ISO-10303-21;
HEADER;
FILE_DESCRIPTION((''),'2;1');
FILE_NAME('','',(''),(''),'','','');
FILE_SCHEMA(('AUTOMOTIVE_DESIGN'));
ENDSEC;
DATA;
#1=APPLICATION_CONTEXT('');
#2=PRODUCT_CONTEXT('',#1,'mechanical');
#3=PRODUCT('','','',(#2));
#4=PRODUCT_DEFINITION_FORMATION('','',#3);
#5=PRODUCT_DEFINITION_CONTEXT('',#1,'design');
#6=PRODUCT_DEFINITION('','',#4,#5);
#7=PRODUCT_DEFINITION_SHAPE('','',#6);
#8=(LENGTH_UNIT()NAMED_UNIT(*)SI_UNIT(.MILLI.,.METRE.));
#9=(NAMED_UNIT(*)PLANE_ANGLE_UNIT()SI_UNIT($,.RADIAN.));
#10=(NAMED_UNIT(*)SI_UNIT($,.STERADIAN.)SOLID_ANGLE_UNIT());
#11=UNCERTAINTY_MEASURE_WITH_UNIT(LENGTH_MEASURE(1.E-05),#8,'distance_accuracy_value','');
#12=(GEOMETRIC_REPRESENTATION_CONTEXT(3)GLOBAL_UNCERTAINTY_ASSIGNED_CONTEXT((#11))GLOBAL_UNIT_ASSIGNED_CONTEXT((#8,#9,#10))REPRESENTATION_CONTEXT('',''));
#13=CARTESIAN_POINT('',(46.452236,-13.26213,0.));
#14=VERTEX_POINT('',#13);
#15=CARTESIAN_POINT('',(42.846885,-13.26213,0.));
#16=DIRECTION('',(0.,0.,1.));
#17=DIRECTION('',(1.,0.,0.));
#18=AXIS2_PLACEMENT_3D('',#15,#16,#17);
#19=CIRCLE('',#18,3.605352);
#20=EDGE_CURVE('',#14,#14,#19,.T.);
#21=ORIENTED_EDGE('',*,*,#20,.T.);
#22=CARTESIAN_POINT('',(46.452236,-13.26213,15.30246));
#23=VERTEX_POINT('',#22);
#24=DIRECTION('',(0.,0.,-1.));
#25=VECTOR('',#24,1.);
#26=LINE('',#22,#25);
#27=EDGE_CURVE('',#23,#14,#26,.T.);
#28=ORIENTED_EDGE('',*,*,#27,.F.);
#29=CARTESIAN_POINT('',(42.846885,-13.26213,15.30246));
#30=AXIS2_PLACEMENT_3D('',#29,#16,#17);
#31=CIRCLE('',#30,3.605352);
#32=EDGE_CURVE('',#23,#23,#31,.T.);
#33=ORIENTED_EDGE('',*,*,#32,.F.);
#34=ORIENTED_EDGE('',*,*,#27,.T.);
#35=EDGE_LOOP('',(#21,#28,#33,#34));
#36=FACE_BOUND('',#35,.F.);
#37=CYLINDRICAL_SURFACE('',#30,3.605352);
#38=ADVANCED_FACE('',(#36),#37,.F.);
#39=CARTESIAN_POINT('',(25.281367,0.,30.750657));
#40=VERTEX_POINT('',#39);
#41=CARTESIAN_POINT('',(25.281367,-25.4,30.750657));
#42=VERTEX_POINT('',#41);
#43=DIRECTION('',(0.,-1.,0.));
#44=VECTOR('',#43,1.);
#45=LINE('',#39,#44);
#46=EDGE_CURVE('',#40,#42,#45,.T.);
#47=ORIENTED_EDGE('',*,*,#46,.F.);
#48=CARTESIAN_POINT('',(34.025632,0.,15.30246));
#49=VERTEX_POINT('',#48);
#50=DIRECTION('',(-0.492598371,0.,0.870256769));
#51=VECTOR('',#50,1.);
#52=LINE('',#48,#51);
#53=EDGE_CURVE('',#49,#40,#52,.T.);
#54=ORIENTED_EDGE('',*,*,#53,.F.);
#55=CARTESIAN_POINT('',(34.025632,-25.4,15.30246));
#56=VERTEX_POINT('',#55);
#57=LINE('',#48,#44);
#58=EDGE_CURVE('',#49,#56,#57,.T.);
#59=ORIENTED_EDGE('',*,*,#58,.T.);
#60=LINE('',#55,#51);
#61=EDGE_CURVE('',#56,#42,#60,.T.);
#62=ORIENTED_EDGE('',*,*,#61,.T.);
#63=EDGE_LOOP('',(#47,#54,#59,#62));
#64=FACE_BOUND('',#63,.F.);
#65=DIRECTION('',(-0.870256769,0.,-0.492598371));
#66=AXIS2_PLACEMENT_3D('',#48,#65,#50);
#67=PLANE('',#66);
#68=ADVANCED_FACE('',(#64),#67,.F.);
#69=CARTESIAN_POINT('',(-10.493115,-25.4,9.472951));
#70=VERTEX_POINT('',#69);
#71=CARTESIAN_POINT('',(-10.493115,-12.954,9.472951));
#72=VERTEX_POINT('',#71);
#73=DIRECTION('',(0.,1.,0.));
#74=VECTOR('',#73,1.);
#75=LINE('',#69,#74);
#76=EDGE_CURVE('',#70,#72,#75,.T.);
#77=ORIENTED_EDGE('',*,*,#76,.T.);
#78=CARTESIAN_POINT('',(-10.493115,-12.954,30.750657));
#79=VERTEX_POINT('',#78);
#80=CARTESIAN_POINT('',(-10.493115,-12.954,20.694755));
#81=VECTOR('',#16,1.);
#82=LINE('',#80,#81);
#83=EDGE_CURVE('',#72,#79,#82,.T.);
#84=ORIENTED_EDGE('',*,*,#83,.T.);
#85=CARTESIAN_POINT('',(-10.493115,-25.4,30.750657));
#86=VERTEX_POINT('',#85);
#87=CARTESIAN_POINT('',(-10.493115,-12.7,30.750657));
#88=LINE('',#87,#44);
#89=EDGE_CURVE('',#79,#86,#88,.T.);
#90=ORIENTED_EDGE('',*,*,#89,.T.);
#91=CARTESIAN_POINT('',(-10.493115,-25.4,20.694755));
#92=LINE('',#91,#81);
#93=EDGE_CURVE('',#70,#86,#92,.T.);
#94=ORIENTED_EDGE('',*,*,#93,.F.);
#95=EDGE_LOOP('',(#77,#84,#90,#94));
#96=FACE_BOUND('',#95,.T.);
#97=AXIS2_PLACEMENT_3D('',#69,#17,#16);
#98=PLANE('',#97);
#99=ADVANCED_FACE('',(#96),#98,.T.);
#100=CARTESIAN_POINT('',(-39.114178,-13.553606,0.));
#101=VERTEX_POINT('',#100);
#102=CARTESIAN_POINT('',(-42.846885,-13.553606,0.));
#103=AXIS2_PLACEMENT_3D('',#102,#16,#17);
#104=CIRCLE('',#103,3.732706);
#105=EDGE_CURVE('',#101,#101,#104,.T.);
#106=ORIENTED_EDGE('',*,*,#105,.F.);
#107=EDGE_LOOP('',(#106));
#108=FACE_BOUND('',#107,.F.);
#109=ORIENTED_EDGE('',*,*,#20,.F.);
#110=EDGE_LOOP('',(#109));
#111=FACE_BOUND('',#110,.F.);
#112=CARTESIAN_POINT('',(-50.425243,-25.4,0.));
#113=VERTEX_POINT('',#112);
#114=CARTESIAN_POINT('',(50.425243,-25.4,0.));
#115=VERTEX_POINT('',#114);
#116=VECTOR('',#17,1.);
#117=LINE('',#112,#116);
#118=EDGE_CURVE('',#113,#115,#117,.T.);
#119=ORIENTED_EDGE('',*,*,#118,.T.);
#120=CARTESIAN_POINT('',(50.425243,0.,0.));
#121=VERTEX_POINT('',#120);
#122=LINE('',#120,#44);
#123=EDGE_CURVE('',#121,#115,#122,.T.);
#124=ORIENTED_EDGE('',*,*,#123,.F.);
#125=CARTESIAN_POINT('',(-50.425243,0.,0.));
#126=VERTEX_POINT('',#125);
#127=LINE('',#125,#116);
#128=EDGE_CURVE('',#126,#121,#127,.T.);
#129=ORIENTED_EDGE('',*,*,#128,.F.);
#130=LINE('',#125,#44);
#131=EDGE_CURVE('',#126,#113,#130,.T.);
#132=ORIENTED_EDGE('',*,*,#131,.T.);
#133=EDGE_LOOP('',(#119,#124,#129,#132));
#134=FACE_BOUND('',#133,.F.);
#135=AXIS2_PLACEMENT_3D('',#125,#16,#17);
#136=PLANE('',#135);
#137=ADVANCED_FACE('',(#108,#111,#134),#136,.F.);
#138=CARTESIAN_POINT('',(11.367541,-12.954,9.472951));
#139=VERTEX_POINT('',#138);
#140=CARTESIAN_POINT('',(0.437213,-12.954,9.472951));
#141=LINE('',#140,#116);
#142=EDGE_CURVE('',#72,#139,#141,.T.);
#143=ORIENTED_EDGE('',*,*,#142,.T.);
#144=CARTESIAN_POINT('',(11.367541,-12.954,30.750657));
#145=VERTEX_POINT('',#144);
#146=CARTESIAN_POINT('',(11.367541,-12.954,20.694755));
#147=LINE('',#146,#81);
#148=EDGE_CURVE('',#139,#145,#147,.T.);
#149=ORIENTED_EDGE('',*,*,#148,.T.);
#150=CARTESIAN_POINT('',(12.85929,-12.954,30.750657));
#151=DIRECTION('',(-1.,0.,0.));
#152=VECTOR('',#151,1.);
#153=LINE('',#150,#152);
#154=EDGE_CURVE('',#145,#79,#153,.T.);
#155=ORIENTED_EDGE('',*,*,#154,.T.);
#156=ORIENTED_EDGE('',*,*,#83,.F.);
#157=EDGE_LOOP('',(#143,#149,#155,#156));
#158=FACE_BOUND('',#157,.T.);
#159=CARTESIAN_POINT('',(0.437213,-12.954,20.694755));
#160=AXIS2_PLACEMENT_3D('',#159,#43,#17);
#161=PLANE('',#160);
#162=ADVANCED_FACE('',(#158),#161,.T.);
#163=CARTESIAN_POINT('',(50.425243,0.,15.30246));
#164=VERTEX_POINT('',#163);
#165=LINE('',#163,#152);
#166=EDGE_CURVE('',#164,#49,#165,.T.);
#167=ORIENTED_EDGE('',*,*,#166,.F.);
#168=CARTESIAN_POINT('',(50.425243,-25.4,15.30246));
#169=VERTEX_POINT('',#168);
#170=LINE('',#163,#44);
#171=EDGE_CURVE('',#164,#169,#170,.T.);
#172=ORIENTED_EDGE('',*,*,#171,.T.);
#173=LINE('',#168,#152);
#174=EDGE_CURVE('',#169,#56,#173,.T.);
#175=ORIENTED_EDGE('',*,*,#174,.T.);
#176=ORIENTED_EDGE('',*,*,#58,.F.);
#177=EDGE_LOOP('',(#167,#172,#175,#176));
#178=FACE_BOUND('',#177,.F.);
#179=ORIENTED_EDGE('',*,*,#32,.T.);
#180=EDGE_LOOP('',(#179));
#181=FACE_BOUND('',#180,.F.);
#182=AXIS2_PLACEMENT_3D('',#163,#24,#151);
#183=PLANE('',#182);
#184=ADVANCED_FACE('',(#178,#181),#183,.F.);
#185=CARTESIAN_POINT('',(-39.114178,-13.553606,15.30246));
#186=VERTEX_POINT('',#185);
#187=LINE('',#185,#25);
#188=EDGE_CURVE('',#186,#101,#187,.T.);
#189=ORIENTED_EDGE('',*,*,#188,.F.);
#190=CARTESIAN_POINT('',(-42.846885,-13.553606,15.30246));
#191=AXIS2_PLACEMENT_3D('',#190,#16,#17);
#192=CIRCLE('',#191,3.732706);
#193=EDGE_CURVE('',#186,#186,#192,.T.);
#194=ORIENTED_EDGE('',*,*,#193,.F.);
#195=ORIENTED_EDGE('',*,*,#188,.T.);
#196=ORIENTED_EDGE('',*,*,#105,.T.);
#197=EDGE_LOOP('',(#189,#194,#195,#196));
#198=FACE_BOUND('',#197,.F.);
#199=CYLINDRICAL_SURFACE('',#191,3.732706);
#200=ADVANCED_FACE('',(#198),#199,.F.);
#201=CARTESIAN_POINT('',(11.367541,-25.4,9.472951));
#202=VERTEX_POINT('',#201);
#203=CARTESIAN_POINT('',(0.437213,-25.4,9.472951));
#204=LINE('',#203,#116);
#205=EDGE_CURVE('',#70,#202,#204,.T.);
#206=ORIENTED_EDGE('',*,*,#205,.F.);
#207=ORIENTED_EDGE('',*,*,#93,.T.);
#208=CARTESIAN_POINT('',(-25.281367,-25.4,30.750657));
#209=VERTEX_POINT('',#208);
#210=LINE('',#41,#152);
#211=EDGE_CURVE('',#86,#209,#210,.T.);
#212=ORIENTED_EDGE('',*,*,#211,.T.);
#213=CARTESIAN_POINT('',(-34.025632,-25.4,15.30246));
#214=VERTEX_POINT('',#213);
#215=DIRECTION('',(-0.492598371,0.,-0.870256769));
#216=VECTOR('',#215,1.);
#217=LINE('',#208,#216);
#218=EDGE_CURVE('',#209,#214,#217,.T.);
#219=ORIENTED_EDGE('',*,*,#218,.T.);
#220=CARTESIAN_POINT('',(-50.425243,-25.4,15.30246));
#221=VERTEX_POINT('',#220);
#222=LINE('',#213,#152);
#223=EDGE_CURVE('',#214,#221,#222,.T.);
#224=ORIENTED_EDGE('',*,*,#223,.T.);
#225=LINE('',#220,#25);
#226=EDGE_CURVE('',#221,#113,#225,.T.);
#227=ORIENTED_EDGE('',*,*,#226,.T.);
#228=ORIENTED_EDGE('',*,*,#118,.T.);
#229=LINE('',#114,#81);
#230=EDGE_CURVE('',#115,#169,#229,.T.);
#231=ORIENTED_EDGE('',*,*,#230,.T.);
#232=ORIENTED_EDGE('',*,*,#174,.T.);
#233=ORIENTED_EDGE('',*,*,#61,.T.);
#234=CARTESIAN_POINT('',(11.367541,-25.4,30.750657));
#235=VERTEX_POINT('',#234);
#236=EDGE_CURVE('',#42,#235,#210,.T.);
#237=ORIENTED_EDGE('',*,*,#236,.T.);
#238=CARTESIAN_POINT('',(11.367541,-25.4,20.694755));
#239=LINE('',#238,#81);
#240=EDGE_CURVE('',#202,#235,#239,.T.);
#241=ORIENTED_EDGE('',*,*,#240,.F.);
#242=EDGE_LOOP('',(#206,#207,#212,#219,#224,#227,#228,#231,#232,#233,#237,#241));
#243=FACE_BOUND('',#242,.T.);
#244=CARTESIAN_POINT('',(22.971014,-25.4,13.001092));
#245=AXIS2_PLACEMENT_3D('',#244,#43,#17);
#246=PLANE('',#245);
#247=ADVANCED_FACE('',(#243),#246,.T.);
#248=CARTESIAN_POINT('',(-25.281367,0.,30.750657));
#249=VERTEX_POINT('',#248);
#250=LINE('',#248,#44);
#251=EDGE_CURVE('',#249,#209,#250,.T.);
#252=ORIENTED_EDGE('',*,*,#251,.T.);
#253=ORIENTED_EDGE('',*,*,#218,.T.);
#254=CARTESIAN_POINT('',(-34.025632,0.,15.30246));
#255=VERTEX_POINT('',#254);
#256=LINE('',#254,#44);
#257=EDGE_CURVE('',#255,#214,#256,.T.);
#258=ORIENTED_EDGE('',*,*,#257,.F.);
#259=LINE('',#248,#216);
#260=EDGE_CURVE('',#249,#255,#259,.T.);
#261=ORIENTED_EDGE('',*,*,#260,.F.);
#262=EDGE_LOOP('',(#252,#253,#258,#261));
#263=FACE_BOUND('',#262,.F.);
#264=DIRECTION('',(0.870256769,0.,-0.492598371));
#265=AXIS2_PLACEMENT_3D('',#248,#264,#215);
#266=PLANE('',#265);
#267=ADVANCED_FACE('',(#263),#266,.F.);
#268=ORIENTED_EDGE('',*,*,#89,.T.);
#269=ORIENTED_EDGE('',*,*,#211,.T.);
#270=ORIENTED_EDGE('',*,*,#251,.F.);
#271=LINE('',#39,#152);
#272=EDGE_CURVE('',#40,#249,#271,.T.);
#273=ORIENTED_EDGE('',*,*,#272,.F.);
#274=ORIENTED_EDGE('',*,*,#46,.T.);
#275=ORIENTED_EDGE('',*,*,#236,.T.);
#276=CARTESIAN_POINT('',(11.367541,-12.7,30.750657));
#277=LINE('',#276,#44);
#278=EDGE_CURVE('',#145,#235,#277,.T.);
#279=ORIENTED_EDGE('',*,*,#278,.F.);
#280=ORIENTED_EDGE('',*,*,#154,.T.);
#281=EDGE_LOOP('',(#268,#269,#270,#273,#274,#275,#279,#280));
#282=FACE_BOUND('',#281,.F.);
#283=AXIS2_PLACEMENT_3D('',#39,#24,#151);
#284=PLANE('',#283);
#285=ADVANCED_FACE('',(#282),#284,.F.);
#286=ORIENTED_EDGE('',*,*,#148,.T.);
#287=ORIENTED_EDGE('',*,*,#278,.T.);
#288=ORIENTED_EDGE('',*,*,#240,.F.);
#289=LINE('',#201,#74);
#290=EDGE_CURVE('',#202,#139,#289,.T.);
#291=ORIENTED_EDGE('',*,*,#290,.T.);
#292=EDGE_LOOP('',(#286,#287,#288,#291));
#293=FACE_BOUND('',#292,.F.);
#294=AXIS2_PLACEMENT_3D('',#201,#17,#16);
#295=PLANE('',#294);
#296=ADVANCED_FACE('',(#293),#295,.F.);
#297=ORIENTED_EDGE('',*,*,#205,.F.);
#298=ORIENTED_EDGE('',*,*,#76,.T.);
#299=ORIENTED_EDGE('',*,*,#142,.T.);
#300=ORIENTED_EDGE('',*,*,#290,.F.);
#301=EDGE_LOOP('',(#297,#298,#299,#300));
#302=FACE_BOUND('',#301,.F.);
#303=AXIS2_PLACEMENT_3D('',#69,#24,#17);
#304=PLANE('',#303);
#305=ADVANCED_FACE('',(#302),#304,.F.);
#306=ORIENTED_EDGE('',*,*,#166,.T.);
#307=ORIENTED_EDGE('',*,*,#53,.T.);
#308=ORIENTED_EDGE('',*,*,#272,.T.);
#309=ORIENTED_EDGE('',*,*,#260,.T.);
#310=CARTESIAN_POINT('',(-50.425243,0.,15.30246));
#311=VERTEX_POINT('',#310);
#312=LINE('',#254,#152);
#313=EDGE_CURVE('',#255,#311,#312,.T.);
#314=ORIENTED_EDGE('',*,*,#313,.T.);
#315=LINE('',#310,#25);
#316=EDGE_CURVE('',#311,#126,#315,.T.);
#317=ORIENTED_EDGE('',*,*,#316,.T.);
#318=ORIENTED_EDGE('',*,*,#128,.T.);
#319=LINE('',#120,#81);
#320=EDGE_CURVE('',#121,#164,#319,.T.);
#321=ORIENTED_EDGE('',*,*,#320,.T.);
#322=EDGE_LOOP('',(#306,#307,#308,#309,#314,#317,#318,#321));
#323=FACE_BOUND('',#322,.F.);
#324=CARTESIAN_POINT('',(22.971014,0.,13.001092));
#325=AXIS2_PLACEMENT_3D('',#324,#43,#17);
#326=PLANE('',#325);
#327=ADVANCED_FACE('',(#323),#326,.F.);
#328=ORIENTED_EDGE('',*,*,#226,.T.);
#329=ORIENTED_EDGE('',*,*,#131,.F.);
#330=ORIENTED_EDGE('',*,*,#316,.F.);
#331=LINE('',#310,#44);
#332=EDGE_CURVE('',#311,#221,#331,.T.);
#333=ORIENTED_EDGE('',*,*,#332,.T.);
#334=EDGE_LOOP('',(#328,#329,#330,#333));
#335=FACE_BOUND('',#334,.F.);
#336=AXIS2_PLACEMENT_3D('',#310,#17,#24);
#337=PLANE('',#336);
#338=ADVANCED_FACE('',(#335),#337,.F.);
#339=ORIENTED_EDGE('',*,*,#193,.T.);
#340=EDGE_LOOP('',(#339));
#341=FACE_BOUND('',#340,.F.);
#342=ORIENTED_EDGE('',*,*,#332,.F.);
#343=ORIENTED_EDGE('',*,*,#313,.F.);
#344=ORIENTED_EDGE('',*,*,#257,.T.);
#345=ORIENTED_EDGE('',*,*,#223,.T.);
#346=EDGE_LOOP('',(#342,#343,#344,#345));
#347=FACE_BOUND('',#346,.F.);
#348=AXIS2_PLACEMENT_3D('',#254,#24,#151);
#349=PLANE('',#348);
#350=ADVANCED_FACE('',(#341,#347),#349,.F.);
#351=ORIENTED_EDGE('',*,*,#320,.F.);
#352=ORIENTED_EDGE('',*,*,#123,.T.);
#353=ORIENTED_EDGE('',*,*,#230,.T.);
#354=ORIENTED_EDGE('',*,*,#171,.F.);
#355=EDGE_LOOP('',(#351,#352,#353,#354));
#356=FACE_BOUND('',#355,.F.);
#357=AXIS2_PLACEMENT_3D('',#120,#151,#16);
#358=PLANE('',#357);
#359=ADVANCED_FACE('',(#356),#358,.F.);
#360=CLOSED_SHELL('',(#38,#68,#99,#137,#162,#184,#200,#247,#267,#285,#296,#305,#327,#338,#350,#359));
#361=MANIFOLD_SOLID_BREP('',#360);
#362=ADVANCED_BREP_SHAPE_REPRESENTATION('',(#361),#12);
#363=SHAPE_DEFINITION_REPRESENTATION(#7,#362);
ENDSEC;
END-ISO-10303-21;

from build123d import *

# Parameters (mm, degrees)
F1_DEPTH = 25.4
F2_W     = 21.8606553972
F2_H     = 22.4436074495
F3_DEPTH = 12.446
F4_R     = 3.7327062706
F4_R_2   = 3.6053518758
F5_DEPTH = 25.4


# Not quite as in the source:
# - ends of sketch curves that miss each other by under 0.0002 mm in the source are joined


with BuildPart() as f1:
    # F0 (on Front) → F1 (new body)
    with BuildSketch(Plane.XZ):
        Polygon((25.2813665716, 30.7506565005), (-8.463e-07, 30.7506565005), (-8.463e-07, 0), (50.4252426326, 0), (50.4252426326, 15.3024597093), (34.0256324557, 15.3024597093), align=None)
        Polygon((-8.463e-07, 0), (-8.463e-07, 30.7506565005), (-25.2813665716, 30.7506565005), (-34.0256324557, 15.3024597093), (-50.4252426326, 15.3024597093), (-50.4252426326, 0), align=None)
    extrude(amount=F1_DEPTH)

    # F2 (on face) → F3 (cut)
    with BuildSketch(Plane.XZ.offset(25.4)):
        with Locations((0.4372131079, 20.6947550178)):
            Rectangle(F2_W, F2_H)
    extrude(amount=-F3_DEPTH, mode=Mode.SUBTRACT)

    # F4 (on face) → F5 (cut)
    with BuildSketch(Plane.XY.offset(15.3024597093)):
        with Locations((-42.8468845785, -13.5536063462)):
            Circle(F4_R)
        with Locations((42.8468845785, -13.2621303201)):
            Circle(F4_R_2)
    extrude(amount=-F5_DEPTH, mode=Mode.SUBTRACT)


solid = f1.part
